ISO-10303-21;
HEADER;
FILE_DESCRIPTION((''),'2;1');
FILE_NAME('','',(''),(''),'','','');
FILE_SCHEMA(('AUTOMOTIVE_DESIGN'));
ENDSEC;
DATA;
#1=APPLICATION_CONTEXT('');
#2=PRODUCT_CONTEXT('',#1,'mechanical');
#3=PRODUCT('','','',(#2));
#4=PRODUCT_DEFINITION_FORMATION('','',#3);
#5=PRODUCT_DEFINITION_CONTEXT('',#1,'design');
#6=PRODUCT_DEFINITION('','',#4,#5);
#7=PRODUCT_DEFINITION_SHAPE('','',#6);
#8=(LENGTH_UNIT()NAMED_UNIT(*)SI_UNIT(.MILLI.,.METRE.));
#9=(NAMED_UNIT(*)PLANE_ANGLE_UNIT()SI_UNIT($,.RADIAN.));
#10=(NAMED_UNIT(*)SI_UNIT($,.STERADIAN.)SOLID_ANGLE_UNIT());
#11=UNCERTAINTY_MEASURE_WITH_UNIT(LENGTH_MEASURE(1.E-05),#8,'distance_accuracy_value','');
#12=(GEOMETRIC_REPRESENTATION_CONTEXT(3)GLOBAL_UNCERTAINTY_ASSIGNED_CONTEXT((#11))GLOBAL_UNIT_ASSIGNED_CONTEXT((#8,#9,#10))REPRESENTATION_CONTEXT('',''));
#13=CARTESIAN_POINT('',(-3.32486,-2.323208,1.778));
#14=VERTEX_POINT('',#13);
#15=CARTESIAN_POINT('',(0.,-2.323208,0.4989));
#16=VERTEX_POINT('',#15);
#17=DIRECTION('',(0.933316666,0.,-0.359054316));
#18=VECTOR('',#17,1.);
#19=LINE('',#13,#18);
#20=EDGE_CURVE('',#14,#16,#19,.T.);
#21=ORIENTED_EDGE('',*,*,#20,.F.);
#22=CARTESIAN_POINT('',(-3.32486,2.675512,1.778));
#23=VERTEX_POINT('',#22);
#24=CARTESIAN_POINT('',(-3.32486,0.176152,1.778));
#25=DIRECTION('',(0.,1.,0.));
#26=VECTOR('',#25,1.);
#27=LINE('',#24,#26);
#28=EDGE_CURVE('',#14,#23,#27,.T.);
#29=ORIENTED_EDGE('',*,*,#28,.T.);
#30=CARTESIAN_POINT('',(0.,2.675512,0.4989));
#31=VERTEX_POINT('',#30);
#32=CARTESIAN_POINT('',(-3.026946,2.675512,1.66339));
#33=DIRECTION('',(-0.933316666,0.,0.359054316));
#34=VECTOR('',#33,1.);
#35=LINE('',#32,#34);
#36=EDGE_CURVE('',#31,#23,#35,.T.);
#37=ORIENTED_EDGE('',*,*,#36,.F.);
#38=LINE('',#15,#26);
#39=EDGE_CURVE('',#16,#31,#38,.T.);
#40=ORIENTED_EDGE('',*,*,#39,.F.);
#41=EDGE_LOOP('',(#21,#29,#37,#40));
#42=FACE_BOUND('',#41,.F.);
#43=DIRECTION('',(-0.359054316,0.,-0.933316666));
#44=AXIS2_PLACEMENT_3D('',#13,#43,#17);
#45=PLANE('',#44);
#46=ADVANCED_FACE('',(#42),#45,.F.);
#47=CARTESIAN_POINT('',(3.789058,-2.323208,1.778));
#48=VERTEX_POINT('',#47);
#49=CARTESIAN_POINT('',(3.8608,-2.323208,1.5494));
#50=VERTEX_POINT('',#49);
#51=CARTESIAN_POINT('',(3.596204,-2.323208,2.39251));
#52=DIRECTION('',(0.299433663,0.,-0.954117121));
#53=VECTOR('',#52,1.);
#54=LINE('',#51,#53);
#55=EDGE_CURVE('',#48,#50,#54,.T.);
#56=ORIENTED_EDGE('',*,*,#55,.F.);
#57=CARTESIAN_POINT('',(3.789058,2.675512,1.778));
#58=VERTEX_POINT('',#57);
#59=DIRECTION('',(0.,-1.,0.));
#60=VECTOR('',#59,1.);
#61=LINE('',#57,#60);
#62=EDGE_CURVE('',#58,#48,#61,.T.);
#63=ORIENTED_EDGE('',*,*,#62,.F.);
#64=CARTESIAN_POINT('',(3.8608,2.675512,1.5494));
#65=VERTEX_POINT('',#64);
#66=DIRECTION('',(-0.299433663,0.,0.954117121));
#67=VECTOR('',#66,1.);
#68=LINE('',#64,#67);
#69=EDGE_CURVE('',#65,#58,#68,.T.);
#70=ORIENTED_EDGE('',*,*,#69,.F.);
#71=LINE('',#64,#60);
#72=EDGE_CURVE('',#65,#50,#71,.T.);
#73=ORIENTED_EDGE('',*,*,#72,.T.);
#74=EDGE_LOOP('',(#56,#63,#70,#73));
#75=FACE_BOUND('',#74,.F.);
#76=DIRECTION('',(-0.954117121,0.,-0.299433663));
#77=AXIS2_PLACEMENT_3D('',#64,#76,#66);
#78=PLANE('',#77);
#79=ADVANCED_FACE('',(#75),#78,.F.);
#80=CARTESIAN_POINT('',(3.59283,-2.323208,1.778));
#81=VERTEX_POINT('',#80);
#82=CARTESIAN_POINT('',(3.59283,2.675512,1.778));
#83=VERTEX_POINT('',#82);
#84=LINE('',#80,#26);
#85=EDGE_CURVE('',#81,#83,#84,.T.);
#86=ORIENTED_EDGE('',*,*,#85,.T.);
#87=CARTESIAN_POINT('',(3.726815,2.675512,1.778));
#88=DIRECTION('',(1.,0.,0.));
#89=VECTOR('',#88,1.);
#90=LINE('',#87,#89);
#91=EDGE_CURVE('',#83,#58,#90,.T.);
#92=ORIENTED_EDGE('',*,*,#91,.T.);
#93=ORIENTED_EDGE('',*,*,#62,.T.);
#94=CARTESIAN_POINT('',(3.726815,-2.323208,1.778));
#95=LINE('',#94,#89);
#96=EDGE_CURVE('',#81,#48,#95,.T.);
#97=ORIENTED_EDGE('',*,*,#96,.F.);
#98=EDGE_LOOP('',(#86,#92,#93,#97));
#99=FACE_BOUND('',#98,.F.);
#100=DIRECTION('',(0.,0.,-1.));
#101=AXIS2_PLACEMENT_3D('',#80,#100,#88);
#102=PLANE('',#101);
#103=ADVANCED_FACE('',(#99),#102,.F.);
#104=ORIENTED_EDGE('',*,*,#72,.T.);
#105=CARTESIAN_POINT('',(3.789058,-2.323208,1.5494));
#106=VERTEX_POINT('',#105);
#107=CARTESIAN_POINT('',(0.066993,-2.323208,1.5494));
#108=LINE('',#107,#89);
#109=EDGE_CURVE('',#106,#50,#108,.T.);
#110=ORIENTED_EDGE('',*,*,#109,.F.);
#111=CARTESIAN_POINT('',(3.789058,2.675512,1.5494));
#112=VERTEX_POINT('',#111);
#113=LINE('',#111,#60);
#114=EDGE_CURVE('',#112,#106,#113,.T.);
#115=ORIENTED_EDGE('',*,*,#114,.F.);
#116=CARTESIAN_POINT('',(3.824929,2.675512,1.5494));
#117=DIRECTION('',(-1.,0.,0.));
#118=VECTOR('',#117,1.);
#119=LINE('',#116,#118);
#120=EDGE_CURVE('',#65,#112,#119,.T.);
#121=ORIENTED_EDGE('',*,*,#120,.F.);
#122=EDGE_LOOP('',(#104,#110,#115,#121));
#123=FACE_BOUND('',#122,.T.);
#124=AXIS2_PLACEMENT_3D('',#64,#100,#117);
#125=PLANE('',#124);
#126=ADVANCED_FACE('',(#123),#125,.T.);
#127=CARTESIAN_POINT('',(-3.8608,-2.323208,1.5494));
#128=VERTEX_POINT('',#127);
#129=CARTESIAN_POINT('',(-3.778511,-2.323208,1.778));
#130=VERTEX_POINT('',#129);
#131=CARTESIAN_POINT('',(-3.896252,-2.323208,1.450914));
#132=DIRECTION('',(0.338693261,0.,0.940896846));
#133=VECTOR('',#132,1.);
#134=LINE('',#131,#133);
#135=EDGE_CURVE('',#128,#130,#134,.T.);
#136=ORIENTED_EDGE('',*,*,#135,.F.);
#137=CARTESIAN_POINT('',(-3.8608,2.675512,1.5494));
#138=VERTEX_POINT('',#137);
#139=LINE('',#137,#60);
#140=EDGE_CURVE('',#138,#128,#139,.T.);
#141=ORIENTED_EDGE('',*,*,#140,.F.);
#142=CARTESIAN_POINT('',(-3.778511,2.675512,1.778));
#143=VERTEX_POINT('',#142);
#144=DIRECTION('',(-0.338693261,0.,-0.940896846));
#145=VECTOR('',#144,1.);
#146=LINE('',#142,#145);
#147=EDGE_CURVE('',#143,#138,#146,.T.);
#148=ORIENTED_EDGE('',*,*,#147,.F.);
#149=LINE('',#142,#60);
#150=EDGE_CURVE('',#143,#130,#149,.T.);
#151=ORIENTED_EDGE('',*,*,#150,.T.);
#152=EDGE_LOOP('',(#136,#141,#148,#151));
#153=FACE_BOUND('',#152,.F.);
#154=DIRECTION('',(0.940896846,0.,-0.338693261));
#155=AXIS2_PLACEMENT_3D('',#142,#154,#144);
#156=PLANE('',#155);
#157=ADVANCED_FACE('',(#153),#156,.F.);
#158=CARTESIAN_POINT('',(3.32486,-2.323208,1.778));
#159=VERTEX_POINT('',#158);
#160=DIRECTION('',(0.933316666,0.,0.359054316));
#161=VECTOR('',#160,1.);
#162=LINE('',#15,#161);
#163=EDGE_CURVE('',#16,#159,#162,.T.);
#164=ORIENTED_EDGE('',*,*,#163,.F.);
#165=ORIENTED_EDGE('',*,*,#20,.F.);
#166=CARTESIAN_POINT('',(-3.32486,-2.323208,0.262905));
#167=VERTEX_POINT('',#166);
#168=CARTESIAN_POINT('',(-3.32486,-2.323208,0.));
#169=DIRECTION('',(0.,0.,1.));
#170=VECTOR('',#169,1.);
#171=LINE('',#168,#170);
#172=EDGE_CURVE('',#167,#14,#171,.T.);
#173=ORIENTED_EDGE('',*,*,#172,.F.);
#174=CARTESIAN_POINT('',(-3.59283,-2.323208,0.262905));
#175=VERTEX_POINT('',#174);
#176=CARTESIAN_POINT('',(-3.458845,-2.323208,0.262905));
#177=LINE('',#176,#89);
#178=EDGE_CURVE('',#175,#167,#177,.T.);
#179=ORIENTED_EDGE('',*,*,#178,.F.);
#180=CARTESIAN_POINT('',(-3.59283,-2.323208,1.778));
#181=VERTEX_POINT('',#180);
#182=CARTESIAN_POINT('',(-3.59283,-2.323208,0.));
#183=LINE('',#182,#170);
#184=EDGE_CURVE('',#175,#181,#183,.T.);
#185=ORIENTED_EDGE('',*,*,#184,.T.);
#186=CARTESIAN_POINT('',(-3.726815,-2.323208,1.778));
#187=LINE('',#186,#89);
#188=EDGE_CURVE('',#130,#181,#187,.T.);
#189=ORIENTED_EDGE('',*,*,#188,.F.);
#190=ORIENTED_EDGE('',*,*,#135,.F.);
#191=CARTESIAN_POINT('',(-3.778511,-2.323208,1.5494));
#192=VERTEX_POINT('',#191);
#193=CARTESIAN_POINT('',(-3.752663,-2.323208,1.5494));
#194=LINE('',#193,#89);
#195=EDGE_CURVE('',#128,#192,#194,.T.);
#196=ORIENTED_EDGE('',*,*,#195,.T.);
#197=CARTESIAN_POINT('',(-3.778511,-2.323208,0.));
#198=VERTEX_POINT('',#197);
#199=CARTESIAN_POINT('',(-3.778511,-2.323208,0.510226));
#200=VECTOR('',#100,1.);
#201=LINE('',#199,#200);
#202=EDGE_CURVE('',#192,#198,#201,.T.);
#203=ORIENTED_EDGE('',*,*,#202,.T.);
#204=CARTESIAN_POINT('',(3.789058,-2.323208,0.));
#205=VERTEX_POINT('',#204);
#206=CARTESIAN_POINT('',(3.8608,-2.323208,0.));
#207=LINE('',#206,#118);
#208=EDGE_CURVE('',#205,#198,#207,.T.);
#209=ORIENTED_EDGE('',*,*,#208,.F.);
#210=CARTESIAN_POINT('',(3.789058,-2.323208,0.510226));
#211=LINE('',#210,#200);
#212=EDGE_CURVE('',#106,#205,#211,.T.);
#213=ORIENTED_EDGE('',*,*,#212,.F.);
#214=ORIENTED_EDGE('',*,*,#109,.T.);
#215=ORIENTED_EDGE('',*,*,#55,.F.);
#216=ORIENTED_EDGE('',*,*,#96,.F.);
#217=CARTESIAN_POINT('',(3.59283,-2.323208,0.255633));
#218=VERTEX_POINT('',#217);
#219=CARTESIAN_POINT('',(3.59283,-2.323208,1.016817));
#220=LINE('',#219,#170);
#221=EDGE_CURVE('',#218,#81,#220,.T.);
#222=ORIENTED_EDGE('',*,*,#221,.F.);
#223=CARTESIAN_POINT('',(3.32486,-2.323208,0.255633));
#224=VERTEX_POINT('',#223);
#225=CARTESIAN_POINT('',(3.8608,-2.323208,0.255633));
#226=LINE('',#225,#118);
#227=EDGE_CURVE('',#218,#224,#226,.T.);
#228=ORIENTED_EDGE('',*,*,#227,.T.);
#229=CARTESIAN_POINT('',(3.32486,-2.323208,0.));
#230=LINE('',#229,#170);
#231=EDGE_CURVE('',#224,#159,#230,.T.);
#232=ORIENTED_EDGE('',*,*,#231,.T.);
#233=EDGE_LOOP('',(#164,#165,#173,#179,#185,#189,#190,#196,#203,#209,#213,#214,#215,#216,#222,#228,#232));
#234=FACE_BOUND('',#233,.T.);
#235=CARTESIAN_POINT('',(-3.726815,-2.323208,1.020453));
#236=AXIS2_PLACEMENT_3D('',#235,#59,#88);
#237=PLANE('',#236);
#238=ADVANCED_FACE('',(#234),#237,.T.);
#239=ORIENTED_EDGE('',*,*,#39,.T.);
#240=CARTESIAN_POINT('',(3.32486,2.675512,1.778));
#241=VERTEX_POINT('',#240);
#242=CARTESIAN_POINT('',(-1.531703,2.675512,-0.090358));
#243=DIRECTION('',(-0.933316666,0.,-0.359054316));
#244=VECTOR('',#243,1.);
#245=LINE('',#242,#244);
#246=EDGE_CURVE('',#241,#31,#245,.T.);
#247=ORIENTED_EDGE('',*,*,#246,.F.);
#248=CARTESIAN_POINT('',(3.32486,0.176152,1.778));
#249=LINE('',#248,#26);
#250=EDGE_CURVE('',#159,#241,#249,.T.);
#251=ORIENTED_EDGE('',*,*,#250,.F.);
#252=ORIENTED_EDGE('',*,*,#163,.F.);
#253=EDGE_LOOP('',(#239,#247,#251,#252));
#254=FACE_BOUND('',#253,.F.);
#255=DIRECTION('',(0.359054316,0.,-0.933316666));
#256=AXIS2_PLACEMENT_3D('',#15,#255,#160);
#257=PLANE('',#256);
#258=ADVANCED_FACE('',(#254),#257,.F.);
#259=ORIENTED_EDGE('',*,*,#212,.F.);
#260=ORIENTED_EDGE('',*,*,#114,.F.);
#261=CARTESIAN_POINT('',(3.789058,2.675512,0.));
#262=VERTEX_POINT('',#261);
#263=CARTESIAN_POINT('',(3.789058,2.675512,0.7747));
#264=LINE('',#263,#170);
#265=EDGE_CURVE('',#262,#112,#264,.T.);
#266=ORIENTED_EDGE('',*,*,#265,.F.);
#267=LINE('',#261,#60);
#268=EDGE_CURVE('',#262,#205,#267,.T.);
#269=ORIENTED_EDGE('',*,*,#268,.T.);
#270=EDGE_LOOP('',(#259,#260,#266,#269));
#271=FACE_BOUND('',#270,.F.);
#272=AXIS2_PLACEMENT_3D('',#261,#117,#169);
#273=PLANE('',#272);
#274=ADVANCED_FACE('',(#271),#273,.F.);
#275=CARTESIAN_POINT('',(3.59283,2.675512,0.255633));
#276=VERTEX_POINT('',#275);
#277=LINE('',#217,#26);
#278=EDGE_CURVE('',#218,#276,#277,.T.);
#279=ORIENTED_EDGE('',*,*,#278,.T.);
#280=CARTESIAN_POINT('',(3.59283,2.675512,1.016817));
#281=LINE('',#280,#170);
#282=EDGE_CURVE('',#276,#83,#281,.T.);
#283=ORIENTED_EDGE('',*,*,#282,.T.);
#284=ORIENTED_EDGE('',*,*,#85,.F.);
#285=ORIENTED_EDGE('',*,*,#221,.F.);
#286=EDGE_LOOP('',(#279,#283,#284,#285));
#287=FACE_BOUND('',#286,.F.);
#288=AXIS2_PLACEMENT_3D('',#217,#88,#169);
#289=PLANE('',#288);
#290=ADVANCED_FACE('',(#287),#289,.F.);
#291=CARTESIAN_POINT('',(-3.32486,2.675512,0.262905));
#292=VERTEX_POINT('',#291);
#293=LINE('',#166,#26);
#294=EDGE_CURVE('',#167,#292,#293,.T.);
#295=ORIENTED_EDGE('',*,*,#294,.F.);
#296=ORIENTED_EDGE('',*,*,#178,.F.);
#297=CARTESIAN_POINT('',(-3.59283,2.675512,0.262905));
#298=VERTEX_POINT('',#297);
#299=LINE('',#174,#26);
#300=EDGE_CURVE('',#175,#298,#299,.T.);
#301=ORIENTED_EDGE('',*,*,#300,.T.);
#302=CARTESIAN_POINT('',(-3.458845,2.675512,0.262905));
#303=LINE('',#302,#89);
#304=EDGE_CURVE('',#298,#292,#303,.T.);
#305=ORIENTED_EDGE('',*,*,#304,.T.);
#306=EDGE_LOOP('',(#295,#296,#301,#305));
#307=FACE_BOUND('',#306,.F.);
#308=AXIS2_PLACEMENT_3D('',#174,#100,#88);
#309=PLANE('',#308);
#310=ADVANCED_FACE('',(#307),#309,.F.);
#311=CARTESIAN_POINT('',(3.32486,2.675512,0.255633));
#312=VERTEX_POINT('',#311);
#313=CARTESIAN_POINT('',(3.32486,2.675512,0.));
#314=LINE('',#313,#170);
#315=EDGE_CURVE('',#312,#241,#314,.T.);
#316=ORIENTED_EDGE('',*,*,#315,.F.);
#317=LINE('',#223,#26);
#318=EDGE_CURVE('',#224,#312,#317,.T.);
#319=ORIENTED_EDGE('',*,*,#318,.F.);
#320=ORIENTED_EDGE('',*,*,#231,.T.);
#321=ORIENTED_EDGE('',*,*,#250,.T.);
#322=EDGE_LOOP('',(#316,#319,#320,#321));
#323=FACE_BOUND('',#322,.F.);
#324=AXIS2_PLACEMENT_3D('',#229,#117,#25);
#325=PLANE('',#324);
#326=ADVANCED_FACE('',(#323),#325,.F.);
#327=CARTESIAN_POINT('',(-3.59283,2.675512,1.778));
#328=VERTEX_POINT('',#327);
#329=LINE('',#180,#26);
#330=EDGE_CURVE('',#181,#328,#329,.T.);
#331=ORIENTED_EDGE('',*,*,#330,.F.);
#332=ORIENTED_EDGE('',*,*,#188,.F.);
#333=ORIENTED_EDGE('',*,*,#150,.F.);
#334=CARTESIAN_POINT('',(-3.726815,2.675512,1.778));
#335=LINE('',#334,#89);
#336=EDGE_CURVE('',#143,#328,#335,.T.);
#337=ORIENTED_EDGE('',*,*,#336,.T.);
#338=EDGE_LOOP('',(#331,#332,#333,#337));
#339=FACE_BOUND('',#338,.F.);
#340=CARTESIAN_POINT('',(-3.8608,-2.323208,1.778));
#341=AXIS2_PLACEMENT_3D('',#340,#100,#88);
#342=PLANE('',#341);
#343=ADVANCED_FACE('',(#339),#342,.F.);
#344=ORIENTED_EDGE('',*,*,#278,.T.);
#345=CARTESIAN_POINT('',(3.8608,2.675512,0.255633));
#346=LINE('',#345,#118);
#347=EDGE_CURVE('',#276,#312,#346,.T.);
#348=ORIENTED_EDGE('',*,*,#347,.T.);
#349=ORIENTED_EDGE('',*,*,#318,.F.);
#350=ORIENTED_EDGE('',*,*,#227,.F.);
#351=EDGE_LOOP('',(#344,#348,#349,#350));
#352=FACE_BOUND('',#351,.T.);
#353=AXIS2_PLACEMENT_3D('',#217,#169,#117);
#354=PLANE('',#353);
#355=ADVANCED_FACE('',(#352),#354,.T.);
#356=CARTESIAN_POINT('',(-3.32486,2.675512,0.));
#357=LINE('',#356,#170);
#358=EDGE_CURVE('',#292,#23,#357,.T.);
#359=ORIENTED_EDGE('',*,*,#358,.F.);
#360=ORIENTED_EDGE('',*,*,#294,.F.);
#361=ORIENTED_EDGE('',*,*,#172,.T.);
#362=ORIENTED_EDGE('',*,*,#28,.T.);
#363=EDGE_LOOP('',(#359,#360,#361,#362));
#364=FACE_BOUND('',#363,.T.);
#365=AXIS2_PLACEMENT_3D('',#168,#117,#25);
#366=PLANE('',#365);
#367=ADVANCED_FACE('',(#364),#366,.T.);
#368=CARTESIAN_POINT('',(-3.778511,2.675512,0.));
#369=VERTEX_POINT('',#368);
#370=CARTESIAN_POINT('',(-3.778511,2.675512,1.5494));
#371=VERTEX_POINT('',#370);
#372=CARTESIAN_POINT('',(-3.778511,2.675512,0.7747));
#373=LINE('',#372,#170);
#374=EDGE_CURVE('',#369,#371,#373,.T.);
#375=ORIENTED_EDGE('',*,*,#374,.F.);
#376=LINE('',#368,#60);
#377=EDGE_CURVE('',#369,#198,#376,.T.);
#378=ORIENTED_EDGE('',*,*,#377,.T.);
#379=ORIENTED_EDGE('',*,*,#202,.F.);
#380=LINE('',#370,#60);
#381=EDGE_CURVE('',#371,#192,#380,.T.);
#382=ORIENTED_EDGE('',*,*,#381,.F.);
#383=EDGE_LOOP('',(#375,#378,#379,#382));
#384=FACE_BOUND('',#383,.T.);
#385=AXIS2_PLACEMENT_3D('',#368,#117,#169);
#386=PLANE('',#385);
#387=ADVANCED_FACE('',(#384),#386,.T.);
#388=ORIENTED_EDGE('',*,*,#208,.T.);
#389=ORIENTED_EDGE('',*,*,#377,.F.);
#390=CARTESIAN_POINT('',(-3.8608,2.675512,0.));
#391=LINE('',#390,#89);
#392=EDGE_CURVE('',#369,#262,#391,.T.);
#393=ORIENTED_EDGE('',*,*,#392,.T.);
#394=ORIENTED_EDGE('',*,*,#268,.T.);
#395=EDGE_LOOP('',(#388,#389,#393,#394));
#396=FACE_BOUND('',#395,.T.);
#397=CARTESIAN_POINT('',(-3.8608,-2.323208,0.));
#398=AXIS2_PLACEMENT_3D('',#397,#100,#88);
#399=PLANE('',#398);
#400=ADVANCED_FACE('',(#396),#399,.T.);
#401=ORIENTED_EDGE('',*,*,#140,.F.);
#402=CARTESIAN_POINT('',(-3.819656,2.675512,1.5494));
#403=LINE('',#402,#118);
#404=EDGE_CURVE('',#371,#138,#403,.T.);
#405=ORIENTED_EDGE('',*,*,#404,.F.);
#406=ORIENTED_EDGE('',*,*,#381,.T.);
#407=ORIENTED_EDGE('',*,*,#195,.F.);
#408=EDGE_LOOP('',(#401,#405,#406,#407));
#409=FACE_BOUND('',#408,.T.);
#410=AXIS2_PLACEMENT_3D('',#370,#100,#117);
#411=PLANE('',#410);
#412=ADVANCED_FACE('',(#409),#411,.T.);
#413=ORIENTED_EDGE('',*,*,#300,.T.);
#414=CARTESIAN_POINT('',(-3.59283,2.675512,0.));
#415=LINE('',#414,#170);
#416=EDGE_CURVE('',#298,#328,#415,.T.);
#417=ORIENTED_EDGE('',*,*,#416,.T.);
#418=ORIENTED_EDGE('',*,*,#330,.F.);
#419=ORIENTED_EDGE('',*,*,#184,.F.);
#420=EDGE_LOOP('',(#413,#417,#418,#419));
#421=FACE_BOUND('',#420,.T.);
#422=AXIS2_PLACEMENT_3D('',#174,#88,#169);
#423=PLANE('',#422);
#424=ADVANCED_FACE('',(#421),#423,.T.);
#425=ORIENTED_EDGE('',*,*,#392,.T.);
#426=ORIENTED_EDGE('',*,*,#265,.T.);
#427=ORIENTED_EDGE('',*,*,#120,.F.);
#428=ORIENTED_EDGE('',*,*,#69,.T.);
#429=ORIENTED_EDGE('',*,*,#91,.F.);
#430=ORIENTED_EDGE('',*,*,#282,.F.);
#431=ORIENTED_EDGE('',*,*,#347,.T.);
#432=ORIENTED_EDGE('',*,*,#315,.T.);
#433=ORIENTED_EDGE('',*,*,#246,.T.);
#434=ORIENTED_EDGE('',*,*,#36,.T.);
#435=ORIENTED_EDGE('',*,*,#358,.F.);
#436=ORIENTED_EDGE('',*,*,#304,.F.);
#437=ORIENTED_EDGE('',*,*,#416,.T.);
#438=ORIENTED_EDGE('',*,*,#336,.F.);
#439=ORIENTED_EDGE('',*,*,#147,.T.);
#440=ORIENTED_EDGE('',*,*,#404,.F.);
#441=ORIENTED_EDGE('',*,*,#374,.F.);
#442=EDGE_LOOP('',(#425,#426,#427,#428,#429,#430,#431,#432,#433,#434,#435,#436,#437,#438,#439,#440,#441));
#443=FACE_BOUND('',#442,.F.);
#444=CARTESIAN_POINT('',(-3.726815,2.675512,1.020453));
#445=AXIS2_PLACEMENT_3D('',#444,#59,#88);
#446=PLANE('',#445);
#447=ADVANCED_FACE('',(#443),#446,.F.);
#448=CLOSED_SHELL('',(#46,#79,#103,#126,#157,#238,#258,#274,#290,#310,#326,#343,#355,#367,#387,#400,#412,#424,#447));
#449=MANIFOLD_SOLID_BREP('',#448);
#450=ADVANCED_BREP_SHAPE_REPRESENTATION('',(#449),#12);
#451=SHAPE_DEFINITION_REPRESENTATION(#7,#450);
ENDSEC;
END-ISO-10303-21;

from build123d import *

# Parameters (mm, degrees)
F0_W     = 6.64972
F0_H     = 4.99872
F1_DEPTH = 1.778
F3_DEPTH = 25.4
F4_W     = 0.26797
F4_H     = 1.5150946512
F4_H_2   = 0.2629053488
F4_H_3   = 0.255633
F4_H_4   = 1.522367
F5_DEPTH = 4.99872
F6_W     = 0.0717422777
F6_H     = 1.5494
F6_W_2   = 0.0822888074
F7_DEPTH = 25.4


with BuildPart() as f1:
    # F0 (on Top) → F1 (new body)
    with BuildSketch(Plane.XY):
        with Locations((0, 0.1761515194)):
            Rectangle(F0_W, F0_H)
    extrude(amount=F1_DEPTH)

    # F2 (on face) → F3 (cut)
    with BuildSketch(Plane.XZ.offset(2.3232084806)):
        Polygon((-3.32486, 1.778), (0, 0.4989000154), (3.32486, 1.778), align=None)
    extrude(amount=-F3_DEPTH, mode=Mode.SUBTRACT)

    # F4 (on face) → F5 (join, through all)
    with BuildSketch(Plane.XZ.offset(2.3232084806)):
        with Locations((-3.726815, 1.0204526744)):
            Rectangle(F4_W, F4_H)
        with Locations((-3.726815, 0.1314526744)):
            Rectangle(F4_W, F4_H_2)
        with Locations((-3.458845, 0.1314526744)):
            Rectangle(F4_W, F4_H_2)
        with Locations((3.458845, 0.1278165)):
            Rectangle(F4_W, F4_H_3)
        with Locations((3.726815, 0.1278165)):
            Rectangle(F4_W, F4_H_3)
        with Locations((3.726815, 1.0168165)):
            Rectangle(F4_W, F4_H_4)
    extrude(amount=-F5_DEPTH)

    # F6 (on face) → F7 (cut)
    with BuildSketch(Plane(origin=(0, 2.6755115194, 0), x_dir=(-1, 0, 0), z_dir=(0, 1, 0))):
        with Locations((-3.8249288612, 0.7747)):
            Rectangle(F6_W, F6_H)
        Polygon((-3.8608, 1.778), (-3.8608, 1.5494), (-3.7890577223, 1.778), align=None)
        Polygon((3.7785111926, 1.778), (3.8608, 1.5494), (3.8608, 1.778), align=None)
        with Locations((3.8196555963, 0.7747)):
            Rectangle(F6_W_2, F6_H)
    extrude(amount=-F7_DEPTH, mode=Mode.SUBTRACT)


solid = f1.part
